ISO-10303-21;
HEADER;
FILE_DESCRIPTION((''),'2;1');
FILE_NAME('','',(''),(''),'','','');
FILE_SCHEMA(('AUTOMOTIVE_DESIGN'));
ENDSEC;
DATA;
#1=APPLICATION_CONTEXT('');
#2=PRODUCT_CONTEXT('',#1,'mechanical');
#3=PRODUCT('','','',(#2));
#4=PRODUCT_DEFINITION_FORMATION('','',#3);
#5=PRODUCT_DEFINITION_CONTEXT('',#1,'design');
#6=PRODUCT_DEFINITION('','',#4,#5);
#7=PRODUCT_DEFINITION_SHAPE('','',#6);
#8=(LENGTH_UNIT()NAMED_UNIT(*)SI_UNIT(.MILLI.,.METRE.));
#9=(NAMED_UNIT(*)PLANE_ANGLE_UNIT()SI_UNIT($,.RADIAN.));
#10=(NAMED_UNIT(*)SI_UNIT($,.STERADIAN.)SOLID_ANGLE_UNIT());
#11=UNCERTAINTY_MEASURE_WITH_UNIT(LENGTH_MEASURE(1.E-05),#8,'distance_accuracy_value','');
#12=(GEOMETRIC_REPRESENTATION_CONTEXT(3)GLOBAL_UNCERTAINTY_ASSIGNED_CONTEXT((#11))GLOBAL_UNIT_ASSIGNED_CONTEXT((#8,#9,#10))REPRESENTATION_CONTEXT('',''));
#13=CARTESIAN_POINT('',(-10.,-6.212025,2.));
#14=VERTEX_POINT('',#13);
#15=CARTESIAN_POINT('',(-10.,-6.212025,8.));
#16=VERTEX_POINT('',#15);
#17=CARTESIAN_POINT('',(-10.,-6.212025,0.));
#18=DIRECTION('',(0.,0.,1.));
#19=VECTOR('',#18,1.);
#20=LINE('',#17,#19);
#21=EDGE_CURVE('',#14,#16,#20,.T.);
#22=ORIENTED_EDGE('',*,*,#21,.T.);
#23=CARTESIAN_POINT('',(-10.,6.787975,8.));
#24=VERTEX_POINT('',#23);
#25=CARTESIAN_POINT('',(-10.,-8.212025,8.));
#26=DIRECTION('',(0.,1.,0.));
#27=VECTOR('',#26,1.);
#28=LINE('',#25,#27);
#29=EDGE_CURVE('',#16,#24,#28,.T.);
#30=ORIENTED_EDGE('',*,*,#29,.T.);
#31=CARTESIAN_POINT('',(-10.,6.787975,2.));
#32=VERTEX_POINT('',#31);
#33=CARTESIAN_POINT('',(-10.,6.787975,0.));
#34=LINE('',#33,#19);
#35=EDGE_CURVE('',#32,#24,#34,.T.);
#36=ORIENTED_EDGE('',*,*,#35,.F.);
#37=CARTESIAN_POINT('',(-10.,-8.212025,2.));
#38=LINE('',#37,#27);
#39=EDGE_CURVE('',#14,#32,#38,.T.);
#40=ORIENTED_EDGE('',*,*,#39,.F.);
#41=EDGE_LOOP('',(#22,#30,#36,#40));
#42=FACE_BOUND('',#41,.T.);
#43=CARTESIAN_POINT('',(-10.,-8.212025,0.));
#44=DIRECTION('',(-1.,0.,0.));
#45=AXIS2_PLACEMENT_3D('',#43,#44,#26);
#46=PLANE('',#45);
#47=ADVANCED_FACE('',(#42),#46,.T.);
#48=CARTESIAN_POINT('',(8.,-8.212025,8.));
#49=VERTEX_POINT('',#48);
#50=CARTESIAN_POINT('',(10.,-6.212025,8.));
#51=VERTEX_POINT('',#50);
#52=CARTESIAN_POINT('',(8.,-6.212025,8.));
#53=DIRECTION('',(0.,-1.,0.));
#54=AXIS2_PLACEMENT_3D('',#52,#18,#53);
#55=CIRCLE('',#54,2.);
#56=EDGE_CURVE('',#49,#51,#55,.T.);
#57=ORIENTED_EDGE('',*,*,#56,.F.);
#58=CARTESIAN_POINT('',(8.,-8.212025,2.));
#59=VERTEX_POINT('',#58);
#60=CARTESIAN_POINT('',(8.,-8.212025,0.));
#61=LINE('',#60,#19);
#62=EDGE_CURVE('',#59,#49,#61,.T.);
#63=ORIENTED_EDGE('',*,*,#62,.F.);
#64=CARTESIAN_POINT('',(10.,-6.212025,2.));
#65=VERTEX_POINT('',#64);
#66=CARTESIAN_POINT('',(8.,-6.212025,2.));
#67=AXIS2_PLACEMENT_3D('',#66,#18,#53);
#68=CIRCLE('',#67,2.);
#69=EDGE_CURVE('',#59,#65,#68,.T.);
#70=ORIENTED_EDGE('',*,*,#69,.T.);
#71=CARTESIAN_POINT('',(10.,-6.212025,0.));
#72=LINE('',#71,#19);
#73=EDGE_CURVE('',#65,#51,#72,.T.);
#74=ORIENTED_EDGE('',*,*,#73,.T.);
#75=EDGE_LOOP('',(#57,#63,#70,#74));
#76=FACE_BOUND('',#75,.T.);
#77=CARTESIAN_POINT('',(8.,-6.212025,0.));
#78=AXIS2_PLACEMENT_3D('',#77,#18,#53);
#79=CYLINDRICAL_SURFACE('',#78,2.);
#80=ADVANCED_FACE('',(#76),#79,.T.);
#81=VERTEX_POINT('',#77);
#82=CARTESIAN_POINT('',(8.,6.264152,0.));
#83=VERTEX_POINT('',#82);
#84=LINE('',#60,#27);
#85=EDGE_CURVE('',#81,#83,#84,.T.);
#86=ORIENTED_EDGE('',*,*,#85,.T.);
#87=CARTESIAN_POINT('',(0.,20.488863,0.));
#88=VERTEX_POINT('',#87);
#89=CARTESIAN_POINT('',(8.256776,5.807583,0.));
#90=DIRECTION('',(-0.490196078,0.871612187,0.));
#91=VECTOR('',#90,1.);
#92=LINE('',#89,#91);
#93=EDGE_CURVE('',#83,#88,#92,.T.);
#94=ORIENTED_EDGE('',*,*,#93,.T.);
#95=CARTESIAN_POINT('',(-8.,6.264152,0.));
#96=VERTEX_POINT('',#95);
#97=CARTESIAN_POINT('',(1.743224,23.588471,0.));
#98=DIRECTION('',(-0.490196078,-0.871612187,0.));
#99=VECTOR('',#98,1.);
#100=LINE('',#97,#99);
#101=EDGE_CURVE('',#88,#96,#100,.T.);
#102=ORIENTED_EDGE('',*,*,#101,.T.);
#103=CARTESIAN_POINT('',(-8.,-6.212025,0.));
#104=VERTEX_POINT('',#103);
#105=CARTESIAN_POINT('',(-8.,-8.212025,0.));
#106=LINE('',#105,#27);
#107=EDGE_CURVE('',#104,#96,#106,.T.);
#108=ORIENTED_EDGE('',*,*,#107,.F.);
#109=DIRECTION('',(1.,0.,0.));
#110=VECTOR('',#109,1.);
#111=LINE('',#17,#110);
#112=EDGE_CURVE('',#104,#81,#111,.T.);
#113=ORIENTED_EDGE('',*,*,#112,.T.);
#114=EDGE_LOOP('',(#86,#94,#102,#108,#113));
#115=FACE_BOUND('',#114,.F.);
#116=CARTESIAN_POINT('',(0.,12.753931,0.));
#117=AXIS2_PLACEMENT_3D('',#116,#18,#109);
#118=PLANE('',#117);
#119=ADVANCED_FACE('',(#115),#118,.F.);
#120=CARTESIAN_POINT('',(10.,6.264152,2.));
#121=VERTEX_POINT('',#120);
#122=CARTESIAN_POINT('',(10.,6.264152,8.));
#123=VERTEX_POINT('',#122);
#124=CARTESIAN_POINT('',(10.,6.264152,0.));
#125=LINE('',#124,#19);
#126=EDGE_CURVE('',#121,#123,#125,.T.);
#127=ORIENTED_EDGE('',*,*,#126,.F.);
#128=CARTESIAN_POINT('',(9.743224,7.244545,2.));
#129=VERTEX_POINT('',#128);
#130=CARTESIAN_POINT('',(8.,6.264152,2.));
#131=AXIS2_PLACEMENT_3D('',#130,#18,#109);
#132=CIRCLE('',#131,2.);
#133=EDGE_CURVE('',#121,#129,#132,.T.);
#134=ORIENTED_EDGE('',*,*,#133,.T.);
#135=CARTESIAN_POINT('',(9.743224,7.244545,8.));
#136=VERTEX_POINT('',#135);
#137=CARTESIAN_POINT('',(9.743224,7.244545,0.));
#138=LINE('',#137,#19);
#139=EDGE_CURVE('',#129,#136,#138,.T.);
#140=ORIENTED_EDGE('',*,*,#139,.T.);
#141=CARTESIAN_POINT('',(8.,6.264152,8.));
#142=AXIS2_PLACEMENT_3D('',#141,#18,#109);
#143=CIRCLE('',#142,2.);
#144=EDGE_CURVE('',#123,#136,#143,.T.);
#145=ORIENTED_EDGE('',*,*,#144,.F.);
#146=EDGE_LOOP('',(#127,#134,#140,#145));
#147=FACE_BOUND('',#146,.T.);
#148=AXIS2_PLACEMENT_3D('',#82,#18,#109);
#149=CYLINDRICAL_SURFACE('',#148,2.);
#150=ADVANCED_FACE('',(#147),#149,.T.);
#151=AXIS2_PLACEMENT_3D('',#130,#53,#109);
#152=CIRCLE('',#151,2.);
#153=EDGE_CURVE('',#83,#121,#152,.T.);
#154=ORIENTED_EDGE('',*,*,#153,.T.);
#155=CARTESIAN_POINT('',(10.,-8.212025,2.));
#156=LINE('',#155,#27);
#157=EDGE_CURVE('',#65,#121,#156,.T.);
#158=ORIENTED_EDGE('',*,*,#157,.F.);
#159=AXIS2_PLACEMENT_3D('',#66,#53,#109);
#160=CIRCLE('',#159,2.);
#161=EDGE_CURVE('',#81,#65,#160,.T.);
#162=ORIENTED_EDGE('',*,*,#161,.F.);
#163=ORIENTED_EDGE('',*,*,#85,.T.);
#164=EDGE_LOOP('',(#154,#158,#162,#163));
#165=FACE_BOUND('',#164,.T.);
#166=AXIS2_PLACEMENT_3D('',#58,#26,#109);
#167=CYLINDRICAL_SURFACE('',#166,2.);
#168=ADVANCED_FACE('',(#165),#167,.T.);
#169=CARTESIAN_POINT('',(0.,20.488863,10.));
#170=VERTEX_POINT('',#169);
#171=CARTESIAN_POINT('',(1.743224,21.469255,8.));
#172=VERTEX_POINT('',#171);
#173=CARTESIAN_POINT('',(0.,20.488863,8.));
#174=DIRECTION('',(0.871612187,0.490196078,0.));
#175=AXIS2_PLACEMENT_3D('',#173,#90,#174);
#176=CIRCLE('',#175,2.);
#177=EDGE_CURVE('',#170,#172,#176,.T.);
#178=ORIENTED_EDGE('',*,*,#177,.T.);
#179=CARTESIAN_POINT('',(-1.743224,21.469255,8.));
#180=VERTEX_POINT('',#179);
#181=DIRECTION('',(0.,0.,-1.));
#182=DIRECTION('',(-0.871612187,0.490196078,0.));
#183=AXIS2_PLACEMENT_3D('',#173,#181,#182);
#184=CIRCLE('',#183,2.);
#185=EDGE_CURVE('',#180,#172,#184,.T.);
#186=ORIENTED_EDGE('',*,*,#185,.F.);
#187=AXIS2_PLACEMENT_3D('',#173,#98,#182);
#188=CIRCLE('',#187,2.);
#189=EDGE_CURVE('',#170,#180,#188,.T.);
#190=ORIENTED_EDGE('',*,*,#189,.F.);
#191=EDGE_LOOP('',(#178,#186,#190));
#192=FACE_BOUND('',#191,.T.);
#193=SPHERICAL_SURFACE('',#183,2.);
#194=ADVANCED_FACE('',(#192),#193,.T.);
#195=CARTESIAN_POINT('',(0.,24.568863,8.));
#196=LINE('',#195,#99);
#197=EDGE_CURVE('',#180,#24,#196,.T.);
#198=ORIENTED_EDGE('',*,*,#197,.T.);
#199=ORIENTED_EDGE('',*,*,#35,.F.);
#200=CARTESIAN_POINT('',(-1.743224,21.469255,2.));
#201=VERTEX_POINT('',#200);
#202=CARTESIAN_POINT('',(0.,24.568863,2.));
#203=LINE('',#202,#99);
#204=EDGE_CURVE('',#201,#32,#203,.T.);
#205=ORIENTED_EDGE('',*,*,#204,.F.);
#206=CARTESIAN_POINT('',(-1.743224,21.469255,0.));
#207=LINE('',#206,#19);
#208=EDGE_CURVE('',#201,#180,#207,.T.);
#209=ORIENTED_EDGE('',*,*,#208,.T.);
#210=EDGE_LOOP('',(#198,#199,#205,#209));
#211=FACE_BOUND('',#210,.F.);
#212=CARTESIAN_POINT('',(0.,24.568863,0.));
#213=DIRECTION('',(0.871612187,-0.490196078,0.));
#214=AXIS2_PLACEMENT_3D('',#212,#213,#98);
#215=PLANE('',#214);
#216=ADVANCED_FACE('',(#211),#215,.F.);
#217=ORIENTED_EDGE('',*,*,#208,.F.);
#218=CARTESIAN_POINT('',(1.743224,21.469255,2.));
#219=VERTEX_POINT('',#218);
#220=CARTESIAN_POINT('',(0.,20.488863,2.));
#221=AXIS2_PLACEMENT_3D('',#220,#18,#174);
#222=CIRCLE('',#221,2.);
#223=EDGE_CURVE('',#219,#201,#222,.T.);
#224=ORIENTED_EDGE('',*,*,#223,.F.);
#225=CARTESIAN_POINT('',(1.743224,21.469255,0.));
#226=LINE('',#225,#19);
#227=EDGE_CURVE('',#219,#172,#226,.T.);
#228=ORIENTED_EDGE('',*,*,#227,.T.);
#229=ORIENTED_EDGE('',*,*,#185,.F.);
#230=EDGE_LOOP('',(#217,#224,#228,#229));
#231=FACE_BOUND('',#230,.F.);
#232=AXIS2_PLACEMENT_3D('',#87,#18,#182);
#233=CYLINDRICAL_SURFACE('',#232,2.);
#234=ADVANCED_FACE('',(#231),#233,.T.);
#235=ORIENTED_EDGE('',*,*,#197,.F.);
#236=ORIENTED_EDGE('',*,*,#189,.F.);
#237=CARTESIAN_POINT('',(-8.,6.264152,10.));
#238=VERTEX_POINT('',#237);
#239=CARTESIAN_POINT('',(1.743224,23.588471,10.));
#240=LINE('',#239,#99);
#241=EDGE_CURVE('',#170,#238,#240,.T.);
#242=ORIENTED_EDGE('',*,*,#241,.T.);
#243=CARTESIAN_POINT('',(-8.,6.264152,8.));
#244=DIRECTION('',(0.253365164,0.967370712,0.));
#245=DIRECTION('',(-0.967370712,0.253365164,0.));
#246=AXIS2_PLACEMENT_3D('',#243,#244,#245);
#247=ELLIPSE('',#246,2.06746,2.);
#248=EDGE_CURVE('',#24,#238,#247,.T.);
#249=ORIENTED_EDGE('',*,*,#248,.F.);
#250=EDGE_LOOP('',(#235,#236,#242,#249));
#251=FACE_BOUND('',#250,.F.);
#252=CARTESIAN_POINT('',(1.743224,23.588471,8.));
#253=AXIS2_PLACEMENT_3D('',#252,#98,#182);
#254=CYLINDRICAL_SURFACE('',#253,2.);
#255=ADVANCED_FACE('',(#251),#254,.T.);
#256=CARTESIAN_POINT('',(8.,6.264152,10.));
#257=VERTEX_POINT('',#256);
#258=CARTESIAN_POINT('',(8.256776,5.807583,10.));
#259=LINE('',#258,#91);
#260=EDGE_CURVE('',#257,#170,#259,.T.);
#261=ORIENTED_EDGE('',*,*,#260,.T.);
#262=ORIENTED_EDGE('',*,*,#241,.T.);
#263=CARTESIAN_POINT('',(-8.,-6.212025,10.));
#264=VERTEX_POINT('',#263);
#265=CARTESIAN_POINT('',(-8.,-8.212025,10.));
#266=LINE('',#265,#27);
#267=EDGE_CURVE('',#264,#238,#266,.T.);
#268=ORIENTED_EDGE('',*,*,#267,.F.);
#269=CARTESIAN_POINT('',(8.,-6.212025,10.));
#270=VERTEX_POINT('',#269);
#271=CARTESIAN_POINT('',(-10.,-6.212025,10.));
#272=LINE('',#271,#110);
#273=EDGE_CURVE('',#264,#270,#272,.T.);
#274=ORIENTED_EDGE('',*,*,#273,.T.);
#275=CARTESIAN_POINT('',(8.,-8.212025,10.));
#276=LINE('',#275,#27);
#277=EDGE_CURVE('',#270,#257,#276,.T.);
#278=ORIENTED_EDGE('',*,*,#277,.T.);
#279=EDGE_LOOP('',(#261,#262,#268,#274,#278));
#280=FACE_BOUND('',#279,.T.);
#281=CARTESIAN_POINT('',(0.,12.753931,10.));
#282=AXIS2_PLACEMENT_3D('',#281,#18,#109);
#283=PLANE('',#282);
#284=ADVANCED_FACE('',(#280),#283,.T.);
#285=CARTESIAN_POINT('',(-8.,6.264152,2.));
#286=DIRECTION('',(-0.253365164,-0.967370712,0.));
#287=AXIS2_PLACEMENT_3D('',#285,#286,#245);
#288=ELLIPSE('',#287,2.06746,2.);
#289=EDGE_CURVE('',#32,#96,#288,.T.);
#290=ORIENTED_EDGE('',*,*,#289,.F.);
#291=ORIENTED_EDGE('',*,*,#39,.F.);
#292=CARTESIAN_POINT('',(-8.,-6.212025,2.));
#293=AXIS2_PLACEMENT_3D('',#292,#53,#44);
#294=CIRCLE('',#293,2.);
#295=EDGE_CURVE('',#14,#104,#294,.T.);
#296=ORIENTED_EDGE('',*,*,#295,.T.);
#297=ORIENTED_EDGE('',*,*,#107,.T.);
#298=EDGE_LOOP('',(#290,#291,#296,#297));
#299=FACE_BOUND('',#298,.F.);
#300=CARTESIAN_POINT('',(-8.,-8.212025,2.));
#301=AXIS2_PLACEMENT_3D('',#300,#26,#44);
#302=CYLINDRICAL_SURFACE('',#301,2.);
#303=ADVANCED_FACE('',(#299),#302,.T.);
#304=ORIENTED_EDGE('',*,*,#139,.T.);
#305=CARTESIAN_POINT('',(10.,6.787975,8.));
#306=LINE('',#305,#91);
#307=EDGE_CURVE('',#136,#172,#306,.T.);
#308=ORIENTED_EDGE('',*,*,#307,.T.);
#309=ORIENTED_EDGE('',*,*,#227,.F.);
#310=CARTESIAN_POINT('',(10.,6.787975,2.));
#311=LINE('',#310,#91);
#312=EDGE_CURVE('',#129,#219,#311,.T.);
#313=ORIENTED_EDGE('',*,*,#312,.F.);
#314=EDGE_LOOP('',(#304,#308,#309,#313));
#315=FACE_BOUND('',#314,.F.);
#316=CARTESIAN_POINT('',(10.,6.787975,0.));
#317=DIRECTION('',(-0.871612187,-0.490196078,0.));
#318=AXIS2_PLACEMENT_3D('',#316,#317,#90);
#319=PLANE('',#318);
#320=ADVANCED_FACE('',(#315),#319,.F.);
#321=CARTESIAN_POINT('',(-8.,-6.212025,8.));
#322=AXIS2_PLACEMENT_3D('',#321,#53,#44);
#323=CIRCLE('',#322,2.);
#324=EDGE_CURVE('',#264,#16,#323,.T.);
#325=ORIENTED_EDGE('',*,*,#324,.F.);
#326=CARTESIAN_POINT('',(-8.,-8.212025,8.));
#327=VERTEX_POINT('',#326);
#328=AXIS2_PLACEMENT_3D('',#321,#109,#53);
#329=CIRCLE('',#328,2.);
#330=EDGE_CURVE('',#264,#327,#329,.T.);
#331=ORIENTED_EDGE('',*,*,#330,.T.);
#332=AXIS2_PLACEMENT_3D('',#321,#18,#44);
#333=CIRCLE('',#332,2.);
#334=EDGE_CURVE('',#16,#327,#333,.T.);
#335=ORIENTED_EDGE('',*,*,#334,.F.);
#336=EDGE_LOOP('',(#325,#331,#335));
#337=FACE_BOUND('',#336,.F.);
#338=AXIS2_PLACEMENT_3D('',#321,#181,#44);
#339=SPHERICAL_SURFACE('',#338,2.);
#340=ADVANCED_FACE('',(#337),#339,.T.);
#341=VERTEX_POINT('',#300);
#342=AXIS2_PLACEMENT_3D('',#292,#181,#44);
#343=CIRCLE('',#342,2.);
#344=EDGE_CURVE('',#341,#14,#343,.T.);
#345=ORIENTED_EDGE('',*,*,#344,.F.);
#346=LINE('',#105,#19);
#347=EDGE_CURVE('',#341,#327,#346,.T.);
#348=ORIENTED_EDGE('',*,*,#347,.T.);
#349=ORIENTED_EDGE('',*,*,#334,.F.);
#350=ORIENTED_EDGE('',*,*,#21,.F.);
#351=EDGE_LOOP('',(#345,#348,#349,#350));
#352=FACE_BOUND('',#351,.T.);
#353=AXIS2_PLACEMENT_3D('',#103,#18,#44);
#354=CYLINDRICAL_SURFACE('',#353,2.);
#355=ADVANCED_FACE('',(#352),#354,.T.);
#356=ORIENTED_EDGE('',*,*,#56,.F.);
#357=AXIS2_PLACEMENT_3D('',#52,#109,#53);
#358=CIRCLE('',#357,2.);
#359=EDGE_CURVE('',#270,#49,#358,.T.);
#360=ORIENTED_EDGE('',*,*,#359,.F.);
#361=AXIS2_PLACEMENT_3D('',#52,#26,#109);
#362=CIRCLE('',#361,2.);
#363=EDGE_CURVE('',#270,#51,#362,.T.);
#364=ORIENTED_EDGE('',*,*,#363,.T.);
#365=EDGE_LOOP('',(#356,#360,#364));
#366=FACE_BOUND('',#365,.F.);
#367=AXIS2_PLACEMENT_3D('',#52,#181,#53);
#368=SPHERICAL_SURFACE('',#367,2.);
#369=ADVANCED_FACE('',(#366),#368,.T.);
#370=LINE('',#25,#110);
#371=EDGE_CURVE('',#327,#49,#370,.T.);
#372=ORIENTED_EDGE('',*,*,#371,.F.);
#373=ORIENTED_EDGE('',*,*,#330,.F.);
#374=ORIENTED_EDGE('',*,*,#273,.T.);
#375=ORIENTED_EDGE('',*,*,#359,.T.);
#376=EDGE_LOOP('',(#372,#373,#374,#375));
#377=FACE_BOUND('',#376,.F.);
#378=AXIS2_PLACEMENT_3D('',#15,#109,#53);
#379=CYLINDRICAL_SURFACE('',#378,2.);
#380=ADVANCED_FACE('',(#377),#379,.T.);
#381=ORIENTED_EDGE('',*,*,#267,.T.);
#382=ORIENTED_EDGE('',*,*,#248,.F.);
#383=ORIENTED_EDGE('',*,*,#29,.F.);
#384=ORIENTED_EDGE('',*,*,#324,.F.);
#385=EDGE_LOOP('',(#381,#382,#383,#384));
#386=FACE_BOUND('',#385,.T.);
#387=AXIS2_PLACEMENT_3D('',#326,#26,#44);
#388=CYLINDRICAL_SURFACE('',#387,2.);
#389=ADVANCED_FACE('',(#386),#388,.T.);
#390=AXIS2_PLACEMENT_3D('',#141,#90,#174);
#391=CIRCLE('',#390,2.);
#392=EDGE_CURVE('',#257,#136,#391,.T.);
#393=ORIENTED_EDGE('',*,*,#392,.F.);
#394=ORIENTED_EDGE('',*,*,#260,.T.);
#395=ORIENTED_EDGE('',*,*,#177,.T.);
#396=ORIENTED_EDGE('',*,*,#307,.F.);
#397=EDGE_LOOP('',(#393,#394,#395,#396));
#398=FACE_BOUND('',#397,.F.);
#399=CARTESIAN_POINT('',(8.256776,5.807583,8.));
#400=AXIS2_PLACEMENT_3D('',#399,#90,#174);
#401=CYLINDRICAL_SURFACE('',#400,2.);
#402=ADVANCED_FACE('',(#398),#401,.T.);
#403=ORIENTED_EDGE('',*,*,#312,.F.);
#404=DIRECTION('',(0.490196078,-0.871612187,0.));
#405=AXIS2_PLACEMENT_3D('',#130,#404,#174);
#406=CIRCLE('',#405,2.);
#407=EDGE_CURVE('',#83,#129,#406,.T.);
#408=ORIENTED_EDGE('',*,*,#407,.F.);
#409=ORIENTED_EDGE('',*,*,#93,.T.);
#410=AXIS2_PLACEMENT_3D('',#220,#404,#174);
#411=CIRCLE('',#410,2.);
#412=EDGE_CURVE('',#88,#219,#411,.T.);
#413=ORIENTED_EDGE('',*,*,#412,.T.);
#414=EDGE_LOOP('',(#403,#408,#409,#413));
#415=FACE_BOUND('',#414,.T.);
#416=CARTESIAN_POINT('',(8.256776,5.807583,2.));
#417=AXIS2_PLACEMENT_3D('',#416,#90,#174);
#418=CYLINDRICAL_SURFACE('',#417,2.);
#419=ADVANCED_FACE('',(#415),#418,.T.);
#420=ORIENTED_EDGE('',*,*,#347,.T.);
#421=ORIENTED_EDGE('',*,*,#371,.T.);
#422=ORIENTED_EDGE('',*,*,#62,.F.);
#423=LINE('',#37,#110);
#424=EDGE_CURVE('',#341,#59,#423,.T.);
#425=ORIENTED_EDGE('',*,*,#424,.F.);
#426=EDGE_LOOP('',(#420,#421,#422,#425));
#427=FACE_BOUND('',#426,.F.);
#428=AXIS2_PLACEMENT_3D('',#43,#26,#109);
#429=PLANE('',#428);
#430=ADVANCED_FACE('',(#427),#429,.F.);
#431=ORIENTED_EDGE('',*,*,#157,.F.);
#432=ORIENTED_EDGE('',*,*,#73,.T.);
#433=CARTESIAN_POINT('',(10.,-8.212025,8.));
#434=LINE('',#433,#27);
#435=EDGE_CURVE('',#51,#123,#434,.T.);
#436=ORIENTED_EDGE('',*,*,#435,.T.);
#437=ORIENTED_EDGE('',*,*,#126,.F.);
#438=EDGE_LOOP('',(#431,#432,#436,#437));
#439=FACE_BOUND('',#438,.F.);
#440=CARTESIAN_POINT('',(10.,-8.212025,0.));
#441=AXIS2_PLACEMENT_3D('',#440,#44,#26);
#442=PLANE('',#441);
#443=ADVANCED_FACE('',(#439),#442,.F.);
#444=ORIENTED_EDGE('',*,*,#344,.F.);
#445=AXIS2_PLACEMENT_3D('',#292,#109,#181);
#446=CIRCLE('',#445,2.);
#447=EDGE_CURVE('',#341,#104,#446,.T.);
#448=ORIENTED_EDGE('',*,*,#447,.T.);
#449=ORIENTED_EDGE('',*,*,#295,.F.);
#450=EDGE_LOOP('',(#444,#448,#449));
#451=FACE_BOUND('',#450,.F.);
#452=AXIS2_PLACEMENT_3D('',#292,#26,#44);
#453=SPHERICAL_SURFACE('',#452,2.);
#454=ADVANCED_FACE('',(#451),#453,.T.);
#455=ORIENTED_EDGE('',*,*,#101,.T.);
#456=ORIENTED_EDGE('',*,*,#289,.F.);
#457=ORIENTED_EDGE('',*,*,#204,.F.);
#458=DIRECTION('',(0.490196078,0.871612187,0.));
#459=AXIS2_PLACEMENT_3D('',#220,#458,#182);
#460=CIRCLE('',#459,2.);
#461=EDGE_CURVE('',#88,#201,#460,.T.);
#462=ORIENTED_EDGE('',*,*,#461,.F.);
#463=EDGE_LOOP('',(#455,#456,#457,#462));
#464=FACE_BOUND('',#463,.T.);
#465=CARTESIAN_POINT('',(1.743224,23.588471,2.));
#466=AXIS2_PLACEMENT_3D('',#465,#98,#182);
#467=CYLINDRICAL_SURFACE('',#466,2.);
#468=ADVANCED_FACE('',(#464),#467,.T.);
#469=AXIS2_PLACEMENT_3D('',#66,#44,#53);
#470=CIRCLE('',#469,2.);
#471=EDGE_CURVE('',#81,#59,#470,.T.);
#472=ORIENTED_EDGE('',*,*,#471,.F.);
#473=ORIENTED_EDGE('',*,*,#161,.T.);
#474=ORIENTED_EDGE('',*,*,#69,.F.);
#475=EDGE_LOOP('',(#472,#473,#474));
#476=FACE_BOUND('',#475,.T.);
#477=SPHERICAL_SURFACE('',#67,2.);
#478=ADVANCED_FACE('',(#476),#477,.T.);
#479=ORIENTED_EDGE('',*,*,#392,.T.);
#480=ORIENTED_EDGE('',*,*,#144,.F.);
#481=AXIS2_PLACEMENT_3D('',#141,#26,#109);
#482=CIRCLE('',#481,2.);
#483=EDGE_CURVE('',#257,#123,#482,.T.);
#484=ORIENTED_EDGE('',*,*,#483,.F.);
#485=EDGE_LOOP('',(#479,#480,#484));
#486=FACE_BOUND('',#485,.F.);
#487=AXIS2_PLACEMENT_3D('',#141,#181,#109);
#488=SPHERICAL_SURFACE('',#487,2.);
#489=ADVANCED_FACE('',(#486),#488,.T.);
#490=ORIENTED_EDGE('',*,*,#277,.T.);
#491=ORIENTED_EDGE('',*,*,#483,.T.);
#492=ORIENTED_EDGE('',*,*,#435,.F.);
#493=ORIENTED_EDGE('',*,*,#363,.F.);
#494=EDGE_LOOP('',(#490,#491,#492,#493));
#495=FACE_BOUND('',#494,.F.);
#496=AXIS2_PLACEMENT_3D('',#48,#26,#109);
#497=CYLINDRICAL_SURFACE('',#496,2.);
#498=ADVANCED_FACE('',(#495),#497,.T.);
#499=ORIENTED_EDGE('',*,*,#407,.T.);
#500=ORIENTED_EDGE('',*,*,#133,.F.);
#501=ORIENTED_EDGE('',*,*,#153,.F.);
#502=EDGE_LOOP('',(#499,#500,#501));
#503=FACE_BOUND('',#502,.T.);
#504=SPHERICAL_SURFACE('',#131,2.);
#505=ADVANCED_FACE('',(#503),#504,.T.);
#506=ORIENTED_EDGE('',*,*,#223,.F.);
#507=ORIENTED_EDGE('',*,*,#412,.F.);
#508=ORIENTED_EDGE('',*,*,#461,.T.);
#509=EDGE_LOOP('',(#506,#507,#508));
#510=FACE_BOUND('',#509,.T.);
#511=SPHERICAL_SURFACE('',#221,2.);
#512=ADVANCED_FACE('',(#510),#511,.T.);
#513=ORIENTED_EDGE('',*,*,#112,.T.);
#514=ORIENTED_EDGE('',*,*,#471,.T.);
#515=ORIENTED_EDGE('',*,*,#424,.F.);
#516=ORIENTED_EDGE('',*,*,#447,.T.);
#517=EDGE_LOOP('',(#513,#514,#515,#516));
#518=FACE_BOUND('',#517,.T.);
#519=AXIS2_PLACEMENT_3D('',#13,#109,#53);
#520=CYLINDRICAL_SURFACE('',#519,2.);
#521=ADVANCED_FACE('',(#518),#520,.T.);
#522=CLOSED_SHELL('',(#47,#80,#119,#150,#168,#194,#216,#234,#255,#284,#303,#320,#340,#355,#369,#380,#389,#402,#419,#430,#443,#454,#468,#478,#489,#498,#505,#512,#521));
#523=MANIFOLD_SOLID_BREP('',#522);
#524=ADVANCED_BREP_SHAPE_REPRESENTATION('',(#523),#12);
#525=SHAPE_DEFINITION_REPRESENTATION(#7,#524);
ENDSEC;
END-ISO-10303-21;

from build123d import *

# Parameters (mm, degrees)
F0_W     = 20
F0_H     = 15
F1_DEPTH = 10
F3_R     = 2


# Not quite as in the source:
# - a feature of the source that left no trace in its solid (it failed there, or was rolled back) is left out


with BuildPart() as f1:
    # F0 (on Top) → F1 (new body)
    with BuildSketch(Plane.XY):
        Polygon((0, 24.5688632738), (-10, 6.7879746571), (10, 6.7879746571), align=None)
        with Locations((0, -0.7120253429)):
            Rectangle(F0_W, F0_H)
    extrude(amount=F1_DEPTH)

    # F3
    f3_edges = [f1.edges().sort_by_distance(p)[0] for p in [
        (-10, -0.712025, 0),
        (-5, 15.678419, 0),
        (0, 24.568863, 5),
        (-5, 15.678419, 10),
        (-10, -8.212025, 5),
        (-10, -0.712025, 10),
        (10, -8.212025, 5),
        (0, -8.212025, 0),
        (0, -8.212025, 10),
        (10, 6.787975, 5),
        (10, -0.712025, 0),
        (10, -0.712025, 10),
        (5, 15.678419, 0),
        (5, 15.678419, 10),
    ]]
    fillet(f3_edges, radius=F3_R)


solid = f1.part
